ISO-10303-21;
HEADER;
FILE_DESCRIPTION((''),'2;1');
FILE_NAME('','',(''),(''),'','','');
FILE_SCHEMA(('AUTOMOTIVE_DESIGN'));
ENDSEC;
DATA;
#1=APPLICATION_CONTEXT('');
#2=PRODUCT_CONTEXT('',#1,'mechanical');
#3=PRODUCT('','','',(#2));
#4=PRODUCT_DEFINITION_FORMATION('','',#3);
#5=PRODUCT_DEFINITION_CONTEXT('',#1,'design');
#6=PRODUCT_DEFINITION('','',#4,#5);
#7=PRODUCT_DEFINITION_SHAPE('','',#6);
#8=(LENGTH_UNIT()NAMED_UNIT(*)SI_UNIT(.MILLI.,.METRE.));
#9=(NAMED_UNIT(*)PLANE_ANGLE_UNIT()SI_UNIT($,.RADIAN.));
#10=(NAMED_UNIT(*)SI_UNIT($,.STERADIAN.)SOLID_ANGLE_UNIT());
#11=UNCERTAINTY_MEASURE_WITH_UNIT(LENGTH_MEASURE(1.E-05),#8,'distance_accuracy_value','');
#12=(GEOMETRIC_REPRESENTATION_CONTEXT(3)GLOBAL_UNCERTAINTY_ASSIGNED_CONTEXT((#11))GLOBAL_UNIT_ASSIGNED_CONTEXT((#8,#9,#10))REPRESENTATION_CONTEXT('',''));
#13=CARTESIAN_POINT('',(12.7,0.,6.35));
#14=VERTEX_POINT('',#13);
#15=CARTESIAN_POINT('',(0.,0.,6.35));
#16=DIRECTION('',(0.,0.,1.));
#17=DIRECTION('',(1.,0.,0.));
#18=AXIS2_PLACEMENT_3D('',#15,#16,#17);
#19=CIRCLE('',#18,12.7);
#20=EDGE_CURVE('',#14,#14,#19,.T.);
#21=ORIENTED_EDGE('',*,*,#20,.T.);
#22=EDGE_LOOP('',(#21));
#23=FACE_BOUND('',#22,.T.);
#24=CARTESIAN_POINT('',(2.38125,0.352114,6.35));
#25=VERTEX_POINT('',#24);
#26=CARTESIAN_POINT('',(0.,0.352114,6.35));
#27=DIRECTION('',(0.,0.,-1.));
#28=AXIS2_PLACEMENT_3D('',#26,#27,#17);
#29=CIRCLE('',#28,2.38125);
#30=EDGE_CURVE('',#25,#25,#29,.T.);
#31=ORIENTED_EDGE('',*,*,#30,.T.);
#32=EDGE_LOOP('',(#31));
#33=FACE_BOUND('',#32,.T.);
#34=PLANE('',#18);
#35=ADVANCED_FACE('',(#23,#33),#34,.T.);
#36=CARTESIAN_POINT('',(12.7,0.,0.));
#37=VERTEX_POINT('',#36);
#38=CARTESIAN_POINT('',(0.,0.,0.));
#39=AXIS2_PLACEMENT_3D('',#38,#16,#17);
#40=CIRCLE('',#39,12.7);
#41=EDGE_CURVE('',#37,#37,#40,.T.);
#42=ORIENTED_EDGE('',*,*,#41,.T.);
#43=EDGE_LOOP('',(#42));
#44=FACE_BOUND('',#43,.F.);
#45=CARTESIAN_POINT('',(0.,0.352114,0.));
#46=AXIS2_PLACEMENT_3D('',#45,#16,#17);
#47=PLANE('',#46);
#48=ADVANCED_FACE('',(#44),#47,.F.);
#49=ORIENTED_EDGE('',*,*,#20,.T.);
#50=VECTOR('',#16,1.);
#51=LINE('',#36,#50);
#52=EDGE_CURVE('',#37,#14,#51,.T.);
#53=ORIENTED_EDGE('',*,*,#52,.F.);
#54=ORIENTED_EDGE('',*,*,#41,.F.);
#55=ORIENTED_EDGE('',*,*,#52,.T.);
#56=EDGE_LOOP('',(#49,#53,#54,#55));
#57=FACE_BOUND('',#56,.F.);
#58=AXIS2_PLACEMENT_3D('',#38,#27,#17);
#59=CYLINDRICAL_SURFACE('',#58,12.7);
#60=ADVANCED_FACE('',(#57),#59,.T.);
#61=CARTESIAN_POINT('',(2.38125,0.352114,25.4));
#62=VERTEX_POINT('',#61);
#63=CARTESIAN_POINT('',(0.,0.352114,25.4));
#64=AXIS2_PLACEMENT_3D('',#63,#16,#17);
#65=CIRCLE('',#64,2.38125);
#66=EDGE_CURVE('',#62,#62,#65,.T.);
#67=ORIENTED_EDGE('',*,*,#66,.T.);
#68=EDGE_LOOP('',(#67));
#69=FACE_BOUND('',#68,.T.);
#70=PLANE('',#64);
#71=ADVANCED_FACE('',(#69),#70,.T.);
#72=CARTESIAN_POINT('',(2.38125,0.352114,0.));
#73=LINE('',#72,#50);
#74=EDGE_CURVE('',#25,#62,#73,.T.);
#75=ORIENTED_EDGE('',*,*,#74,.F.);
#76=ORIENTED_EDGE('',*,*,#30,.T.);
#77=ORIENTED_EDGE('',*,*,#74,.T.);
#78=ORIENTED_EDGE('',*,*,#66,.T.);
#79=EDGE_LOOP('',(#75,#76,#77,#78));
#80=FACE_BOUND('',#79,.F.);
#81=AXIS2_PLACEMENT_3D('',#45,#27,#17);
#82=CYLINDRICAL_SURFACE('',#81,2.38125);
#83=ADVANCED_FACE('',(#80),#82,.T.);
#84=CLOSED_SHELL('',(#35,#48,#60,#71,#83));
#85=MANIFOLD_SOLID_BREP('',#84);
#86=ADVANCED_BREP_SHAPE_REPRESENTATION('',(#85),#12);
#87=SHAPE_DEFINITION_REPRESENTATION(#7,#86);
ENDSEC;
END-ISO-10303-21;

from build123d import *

# Parameters (mm, degrees)
F0_R     = 12.7
F1_DEPTH = 6.35
F2_R     = 2.38125
F3_DEPTH = 25.4


# Not quite as in the source:
# - a length typed as a fraction of an inch, garbled in the dataset ("3 / 203.2 mm" for 3/8 in), is restored


with BuildPart() as f1:
    # F0 (on Top) → F1 (new body)
    with BuildSketch(Plane.XY):
        Circle(F0_R)
    extrude(amount=F1_DEPTH)

    # F2 (on Top) → F3 (join)
    with BuildSketch(Plane.XY):
        with Locations((0, 0.3521142062)):
            Circle(F2_R)
    extrude(amount=F3_DEPTH)


solid = f1.part
